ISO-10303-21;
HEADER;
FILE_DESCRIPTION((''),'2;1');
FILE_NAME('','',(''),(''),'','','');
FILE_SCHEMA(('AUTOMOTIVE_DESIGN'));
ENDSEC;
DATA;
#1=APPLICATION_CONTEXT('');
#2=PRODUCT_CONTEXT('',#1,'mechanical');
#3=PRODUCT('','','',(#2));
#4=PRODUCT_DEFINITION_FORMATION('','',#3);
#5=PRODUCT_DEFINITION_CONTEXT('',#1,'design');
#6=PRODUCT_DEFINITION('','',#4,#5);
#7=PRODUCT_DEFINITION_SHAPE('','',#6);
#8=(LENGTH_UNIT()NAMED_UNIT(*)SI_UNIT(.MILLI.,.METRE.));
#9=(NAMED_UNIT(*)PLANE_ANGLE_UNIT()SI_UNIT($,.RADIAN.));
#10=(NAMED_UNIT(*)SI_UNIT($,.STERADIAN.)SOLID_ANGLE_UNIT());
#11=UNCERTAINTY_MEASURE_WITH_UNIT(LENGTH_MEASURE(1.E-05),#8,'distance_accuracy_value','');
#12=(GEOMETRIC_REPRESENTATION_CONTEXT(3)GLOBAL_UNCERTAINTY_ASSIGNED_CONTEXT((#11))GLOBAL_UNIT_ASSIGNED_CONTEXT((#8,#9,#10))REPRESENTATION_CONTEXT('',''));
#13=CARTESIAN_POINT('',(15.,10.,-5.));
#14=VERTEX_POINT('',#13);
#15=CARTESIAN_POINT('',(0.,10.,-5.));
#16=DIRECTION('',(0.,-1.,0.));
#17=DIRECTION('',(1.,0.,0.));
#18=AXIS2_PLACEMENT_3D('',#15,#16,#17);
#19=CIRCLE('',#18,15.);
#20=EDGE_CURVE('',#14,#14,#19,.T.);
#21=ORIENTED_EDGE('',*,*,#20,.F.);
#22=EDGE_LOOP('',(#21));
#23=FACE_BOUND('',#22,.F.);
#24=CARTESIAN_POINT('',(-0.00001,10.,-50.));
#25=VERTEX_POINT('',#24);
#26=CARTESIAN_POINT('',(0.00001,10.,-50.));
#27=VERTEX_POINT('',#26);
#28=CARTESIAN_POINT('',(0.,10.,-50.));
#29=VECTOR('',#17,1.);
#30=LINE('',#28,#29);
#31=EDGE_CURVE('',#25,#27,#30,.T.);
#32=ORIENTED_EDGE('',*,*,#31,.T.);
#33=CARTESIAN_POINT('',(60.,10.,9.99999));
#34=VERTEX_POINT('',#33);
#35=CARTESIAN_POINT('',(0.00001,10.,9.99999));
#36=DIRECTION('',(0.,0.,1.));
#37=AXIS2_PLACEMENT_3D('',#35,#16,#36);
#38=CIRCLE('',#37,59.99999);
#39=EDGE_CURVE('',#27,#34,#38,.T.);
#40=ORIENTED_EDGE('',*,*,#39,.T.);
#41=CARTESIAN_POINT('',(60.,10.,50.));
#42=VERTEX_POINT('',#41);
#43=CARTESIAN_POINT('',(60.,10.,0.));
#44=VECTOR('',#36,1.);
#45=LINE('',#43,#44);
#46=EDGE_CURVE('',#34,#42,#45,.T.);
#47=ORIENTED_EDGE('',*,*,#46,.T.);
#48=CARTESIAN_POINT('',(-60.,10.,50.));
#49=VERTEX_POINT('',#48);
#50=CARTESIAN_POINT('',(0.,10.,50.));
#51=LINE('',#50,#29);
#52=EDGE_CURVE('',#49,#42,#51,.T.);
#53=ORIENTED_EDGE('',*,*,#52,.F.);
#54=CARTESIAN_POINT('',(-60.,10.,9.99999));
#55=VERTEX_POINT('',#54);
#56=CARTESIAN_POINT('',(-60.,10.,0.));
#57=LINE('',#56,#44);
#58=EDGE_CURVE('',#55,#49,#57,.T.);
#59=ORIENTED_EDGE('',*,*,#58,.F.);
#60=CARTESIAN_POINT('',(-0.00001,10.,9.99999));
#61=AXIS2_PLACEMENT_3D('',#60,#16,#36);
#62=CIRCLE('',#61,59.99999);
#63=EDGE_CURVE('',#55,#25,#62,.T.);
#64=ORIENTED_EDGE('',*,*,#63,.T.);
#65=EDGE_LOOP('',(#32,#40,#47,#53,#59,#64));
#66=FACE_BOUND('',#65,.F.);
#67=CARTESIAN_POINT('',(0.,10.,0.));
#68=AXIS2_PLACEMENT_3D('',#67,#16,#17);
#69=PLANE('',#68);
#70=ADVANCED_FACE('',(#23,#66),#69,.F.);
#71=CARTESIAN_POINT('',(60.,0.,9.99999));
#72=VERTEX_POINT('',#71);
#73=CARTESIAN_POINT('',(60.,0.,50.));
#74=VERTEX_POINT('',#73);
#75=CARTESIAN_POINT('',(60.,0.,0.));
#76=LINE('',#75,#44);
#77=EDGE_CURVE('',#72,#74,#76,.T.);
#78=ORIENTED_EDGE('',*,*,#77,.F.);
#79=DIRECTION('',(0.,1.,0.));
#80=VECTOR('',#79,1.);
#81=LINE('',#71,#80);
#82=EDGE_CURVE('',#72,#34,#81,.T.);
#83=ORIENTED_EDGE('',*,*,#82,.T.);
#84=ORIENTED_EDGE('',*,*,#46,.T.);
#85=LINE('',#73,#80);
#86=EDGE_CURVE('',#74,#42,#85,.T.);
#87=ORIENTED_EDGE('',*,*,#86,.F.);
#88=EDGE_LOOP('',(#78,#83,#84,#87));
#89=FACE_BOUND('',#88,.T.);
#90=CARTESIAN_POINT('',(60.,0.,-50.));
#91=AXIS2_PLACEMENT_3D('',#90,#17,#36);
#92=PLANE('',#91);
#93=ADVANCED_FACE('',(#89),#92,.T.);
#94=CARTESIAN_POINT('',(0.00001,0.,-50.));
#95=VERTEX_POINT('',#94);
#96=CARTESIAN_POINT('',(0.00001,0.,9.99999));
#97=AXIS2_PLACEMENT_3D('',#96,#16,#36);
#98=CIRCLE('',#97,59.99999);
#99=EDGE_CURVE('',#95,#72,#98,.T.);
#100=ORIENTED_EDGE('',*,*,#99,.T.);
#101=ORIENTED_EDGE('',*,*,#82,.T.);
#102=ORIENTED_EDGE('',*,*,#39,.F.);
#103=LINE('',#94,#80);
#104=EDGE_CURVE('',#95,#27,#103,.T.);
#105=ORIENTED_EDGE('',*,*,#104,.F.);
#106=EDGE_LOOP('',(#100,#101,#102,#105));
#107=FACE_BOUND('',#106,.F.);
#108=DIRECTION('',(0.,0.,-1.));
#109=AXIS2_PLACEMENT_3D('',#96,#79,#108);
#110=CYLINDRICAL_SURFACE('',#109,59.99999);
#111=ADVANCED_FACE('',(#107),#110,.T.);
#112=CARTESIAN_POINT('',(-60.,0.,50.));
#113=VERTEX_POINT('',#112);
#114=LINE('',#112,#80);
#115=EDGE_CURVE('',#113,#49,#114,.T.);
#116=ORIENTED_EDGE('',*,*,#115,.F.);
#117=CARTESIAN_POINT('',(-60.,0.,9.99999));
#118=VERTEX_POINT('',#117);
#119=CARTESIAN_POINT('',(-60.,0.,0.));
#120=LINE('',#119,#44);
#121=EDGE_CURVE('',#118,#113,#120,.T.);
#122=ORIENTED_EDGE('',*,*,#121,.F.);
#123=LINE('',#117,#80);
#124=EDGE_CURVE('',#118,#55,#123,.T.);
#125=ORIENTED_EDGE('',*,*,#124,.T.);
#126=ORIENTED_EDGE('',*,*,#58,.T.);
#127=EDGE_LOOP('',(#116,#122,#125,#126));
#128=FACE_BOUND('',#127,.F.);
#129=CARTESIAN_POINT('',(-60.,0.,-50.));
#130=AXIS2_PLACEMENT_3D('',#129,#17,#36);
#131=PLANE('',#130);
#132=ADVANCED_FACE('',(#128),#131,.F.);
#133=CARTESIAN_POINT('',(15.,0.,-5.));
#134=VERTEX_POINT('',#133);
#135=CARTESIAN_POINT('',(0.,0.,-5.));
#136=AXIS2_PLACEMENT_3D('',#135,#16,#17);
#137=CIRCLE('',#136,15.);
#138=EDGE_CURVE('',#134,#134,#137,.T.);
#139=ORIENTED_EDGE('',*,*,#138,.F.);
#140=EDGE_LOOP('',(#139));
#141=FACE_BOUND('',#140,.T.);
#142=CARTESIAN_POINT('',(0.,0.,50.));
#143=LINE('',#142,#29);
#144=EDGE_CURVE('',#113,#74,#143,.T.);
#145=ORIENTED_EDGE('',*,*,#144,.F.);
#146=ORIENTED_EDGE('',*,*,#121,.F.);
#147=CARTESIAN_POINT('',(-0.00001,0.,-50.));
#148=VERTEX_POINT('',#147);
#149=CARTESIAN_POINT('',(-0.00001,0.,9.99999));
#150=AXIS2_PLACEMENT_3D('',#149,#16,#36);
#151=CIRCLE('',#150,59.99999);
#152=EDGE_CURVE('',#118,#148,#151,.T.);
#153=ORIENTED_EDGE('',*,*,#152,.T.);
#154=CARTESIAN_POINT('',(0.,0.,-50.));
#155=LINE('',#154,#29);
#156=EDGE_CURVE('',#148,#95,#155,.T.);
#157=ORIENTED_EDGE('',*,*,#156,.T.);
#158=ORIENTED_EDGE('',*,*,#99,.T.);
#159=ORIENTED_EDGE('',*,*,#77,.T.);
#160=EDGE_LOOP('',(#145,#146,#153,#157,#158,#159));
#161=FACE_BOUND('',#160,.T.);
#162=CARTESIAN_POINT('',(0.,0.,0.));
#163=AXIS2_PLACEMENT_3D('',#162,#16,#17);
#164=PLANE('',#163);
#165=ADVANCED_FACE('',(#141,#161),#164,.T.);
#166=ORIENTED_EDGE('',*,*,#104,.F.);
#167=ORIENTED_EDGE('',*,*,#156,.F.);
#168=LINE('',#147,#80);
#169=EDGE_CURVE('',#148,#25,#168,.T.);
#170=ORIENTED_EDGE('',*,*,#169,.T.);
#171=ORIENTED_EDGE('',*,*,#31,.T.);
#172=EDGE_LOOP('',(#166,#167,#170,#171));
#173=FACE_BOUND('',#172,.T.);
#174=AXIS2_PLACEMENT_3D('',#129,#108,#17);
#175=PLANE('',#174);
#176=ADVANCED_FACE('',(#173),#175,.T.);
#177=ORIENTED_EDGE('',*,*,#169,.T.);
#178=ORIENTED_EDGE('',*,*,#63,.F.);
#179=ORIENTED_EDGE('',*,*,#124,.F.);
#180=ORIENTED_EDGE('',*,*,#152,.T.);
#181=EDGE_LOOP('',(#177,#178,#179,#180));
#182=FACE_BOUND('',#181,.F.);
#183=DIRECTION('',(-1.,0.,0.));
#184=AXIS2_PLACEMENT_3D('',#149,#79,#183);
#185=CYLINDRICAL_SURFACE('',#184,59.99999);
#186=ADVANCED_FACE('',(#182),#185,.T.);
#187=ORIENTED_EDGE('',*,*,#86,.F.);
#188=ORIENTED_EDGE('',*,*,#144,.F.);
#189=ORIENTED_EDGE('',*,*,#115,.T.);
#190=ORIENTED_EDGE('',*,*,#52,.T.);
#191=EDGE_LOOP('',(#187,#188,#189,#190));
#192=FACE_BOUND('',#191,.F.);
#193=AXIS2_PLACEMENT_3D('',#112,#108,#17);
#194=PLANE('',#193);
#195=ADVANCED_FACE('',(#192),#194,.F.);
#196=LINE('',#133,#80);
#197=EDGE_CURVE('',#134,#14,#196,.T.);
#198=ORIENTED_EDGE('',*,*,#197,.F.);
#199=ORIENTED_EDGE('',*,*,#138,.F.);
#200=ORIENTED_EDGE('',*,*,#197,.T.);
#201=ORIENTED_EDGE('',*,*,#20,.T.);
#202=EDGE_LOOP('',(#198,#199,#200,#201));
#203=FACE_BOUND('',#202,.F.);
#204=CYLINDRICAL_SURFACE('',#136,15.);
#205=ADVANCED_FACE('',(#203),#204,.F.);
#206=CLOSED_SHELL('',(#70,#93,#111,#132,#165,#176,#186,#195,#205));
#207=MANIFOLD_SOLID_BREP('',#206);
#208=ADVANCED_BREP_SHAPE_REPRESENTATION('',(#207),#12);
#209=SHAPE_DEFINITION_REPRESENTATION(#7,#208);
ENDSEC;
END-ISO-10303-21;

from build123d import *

# Parameters (mm, degrees)
F0_W     = 120
F0_H     = 100
F1_DEPTH = 10
F2_R     = 15
F3_DEPTH = 10.001
F4_R     = 59.99999


# Not quite as in the source:
# - a fillet or chamfer is up to 0.001 mm smaller than in the source, because OpenCascade refuses the exact size


with BuildPart() as f1:
    # F0 (on Front) → F1 (new body)
    with BuildSketch(Plane.XZ):
        Rectangle(F0_W, F0_H)
    extrude(amount=-F1_DEPTH)

    # F2 (on Front) → F3 (cut, through all)
    with BuildSketch(Plane.XZ):
        with Locations((0, -5)):
            Circle(F2_R)
    extrude(amount=-F3_DEPTH, mode=Mode.SUBTRACT)

    # F4 (radius 60 in the source; OpenCascade refuses exactly that, so slightly less here)
    f4_edges = [f1.edges().sort_by_distance(p)[0] for p in [
        (-60, 5, -50),
        (60, 5, -50),
    ]]
    fillet(f4_edges, radius=F4_R)


solid = f1.part
